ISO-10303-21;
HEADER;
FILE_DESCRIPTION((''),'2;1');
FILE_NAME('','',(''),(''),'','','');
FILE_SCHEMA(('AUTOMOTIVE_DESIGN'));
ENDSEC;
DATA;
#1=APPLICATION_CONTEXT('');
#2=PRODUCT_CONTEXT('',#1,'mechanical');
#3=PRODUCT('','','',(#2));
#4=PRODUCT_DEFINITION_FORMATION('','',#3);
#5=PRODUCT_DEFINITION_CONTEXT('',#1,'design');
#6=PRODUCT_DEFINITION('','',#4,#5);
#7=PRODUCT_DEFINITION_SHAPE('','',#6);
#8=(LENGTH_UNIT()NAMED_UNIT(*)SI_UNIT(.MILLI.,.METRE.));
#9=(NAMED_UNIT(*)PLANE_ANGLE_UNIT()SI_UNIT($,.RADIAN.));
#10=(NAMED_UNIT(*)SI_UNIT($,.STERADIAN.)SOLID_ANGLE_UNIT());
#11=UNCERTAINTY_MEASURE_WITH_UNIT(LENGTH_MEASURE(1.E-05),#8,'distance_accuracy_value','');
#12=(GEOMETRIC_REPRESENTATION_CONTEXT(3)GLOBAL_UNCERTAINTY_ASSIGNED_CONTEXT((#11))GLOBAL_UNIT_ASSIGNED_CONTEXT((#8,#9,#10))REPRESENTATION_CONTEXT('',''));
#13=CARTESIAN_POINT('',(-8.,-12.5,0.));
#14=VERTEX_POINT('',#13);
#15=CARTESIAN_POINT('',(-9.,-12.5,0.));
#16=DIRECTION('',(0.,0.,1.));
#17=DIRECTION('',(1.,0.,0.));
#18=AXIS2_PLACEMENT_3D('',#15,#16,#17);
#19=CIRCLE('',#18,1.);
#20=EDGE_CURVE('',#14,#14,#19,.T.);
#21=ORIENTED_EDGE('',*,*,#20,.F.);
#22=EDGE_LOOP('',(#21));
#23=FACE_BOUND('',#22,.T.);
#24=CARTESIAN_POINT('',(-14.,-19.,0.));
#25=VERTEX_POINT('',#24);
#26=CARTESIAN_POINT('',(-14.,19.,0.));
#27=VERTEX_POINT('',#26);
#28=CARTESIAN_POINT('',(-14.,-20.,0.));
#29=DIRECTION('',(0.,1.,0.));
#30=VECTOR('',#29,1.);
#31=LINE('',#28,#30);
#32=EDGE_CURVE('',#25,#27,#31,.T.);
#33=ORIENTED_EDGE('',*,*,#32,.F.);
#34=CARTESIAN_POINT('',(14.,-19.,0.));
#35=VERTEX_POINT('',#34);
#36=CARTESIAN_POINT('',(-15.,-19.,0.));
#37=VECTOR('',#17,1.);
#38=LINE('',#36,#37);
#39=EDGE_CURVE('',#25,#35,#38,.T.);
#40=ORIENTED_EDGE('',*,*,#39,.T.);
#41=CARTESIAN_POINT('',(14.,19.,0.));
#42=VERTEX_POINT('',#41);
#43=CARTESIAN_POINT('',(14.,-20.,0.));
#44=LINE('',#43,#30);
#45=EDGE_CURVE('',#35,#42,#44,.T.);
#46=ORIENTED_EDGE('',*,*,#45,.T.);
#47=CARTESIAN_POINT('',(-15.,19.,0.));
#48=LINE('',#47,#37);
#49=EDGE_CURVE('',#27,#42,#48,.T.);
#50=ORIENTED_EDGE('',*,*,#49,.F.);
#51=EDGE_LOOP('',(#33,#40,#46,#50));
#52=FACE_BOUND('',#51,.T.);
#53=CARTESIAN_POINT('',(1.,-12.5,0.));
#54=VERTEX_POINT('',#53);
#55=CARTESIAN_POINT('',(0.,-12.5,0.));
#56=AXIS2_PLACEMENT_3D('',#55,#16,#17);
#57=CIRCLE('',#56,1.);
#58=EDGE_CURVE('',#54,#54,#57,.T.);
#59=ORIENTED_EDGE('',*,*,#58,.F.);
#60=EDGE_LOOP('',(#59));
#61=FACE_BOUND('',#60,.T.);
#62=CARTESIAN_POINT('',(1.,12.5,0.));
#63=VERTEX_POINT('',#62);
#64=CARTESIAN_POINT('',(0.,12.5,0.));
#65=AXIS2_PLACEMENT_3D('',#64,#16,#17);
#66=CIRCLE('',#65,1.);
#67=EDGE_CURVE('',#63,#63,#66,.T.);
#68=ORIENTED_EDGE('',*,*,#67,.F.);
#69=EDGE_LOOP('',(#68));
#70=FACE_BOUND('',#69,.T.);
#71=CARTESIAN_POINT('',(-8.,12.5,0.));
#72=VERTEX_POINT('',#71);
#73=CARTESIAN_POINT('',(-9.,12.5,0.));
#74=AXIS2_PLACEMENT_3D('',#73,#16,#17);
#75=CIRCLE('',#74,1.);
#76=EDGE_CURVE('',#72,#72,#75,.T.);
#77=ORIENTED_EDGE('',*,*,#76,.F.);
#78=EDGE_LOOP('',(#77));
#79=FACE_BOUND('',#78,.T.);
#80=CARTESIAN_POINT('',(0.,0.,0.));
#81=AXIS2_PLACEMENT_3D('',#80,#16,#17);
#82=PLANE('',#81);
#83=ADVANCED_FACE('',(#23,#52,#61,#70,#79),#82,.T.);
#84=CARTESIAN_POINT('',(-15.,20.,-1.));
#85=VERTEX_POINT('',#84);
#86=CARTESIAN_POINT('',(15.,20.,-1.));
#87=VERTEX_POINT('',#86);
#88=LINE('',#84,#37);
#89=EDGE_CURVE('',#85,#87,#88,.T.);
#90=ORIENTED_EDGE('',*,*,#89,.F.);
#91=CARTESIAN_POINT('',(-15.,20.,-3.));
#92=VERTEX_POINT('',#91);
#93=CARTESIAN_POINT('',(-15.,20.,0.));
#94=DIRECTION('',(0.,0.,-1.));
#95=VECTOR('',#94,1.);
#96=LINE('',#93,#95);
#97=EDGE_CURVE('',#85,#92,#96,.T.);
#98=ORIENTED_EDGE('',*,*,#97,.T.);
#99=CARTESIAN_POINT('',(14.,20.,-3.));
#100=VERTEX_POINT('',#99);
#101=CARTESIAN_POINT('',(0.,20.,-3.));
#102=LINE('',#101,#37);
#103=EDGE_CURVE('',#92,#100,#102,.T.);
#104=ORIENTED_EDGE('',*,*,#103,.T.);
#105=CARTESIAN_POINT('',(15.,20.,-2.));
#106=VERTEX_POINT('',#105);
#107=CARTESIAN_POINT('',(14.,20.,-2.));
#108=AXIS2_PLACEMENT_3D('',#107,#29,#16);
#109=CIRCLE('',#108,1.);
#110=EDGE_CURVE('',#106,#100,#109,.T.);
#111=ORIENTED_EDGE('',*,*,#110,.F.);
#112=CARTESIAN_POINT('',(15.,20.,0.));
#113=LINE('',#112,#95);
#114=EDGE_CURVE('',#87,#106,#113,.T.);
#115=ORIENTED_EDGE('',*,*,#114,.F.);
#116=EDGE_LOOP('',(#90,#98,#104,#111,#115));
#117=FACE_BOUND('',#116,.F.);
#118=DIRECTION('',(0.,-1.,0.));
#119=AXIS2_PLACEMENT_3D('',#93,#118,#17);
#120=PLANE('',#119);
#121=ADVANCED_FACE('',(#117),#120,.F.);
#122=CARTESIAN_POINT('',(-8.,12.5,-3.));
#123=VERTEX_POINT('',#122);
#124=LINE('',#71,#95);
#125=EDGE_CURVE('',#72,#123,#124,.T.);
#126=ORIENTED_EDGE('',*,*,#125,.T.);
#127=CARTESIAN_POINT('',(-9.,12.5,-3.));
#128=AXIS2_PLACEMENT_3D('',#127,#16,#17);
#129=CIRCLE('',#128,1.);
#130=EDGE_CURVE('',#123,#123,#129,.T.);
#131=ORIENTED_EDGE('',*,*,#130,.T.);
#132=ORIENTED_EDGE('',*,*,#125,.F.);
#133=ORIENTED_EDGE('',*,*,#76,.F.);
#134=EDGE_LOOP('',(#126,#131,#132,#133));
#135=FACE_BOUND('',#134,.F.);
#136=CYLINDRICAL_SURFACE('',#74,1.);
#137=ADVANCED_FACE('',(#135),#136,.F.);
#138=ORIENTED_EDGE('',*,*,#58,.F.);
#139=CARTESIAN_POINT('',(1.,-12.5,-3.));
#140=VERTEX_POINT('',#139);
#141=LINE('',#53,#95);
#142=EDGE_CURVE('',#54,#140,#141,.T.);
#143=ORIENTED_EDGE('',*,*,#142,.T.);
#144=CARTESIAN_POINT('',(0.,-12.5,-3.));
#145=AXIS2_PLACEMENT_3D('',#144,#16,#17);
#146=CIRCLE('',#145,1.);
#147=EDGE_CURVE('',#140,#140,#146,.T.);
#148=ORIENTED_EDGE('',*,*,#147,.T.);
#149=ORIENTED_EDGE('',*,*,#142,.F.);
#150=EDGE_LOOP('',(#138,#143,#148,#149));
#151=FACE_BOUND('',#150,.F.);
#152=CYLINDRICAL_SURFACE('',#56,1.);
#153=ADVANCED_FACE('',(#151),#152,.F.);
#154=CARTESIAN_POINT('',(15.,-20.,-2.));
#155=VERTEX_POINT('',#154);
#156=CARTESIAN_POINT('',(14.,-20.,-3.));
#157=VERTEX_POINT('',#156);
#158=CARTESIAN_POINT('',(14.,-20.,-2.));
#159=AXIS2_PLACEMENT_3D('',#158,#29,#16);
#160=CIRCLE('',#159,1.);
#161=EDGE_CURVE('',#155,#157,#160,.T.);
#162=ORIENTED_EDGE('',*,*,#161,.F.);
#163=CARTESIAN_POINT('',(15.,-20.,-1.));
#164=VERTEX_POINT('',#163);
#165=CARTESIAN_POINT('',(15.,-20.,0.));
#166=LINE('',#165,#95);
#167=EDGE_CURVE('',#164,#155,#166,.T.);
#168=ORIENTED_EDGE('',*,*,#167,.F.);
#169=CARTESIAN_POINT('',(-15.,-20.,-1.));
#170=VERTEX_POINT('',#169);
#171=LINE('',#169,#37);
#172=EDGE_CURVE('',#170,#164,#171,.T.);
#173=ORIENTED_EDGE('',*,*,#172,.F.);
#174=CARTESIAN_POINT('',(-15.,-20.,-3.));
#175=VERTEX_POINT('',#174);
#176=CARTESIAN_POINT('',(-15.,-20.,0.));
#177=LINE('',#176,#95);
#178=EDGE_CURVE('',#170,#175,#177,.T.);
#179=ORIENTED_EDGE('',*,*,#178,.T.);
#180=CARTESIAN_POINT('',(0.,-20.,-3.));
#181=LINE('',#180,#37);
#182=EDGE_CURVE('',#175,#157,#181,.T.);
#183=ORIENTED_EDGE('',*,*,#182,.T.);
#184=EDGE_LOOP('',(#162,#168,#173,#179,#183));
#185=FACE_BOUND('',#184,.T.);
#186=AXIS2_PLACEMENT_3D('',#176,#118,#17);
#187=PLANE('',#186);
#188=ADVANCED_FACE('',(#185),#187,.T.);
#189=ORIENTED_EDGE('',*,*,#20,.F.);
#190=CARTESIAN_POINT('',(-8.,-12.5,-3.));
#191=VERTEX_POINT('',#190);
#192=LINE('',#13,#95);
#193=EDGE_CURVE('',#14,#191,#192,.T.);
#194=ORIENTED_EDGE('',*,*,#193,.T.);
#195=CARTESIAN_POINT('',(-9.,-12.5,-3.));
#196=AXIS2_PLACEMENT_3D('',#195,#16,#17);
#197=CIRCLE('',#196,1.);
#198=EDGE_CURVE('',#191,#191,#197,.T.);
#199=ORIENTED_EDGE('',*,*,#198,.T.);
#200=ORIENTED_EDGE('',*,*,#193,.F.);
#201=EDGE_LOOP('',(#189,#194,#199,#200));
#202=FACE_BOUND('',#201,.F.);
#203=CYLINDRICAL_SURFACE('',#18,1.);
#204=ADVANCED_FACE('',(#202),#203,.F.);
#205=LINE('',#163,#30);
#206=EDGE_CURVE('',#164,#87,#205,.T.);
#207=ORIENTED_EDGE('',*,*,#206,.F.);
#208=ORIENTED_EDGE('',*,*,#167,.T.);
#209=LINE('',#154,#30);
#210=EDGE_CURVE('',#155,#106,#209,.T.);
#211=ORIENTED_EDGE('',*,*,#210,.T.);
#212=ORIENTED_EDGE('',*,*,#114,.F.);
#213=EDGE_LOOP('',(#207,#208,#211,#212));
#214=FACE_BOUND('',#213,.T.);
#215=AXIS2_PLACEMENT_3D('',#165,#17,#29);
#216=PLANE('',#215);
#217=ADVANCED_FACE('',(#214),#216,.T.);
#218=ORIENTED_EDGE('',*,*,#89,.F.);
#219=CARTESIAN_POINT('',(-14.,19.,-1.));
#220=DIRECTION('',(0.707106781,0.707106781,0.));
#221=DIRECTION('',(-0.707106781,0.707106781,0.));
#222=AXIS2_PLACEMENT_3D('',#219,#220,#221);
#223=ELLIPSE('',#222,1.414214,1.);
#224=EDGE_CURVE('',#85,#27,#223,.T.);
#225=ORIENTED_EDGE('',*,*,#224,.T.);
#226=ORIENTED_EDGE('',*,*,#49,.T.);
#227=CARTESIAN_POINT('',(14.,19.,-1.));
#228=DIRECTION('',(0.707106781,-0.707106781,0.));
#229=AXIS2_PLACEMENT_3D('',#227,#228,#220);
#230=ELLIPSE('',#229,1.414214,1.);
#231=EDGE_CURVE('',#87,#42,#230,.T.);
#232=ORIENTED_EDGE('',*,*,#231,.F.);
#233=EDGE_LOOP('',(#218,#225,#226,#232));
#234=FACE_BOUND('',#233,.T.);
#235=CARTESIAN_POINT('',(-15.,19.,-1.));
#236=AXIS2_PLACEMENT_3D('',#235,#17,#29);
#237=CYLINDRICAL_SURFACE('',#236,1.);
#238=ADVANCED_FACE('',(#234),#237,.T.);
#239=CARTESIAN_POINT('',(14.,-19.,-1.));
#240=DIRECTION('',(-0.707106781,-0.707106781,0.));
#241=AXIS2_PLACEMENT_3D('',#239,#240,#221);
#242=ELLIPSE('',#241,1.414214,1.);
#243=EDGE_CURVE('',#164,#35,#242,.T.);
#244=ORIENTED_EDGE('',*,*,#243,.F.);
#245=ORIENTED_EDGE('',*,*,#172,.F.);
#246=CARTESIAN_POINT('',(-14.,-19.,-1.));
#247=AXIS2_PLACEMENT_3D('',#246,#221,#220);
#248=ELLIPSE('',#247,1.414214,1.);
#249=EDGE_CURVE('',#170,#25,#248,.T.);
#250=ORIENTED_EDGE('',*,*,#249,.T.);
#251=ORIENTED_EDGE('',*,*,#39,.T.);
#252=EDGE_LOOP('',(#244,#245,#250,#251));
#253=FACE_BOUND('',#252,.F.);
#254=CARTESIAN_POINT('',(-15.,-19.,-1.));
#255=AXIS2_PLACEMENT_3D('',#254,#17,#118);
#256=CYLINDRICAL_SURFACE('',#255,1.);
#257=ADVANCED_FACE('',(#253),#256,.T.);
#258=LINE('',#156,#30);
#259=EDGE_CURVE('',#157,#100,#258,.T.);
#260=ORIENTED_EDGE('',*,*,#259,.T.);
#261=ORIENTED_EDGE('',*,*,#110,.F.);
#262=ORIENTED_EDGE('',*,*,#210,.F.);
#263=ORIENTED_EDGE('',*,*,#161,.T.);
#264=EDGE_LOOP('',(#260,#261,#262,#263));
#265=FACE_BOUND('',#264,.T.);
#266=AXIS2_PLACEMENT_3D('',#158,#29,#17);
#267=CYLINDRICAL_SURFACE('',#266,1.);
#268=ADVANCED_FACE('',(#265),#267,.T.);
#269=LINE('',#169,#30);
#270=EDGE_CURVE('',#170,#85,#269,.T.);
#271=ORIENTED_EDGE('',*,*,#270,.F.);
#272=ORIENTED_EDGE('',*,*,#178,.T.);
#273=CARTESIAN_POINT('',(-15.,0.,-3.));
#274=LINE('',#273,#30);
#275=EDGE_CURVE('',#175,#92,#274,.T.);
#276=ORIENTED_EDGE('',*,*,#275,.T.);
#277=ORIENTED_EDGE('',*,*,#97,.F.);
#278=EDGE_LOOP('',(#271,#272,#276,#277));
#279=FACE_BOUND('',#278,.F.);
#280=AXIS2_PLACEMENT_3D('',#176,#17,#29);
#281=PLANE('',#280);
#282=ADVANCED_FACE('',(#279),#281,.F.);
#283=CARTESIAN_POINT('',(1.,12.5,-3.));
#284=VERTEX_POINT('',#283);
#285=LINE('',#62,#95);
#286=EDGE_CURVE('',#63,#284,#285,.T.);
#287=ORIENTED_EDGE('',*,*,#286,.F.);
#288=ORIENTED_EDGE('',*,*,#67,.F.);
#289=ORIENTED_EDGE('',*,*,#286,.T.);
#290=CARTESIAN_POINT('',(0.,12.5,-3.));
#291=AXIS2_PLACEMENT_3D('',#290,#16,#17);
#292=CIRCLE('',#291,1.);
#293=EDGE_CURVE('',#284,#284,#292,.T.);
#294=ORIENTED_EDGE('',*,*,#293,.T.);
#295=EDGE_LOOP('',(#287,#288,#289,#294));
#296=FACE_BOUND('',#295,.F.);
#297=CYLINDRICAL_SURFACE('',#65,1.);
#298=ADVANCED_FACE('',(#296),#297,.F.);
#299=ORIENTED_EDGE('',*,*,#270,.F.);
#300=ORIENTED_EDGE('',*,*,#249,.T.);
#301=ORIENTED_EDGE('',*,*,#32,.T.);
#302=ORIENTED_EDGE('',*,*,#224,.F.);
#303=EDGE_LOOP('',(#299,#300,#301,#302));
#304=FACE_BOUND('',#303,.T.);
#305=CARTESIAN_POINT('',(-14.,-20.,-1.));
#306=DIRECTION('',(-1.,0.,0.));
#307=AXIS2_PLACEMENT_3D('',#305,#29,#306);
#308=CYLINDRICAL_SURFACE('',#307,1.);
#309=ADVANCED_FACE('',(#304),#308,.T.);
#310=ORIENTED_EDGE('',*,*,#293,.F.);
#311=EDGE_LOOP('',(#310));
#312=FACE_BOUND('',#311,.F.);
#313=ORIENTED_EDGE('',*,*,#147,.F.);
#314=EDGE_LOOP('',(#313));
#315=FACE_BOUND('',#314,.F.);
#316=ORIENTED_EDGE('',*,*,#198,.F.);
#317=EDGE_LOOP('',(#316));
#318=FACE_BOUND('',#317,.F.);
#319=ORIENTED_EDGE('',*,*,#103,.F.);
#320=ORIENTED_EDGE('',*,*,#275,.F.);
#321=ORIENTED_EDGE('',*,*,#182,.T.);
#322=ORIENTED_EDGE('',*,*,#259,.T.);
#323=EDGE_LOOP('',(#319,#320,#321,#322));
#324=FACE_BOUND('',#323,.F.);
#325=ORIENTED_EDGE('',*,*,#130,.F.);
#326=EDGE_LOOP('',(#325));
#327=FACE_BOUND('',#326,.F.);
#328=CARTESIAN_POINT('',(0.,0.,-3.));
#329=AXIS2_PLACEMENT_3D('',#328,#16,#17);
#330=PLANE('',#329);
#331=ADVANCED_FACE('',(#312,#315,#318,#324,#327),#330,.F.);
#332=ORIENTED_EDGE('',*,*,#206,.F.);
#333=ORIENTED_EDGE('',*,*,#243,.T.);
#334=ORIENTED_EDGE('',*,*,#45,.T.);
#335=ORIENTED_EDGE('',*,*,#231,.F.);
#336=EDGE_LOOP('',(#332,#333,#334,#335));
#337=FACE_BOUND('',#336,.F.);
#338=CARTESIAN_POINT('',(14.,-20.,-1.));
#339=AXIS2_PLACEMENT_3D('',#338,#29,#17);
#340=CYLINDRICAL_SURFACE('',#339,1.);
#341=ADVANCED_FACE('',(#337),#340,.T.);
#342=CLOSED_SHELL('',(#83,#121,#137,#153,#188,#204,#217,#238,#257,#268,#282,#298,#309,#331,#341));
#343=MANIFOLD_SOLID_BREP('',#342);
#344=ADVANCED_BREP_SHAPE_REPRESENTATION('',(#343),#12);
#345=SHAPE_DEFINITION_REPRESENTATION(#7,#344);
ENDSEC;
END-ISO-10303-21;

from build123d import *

# Parameters (mm, degrees)
F0_W     = 30
F0_H     = 40
F0_R     = 1
F1_DEPTH = 3
F2_R     = 1


# Not quite as in the source:
# - a feature names something its author has since deleted; it is built from what else it names


with BuildPart() as f1:
    # F0 (on Top) → F1 (new body)
    with BuildSketch(Plane.XY):
        Rectangle(F0_W, F0_H)
        with Locations((-9, -12.5)):
            Circle(F0_R, mode=Mode.SUBTRACT)
        with Locations((0, -12.5)):
            Circle(F0_R, mode=Mode.SUBTRACT)
        with Locations((-9, 12.5)):
            Circle(F0_R, mode=Mode.SUBTRACT)
        with Locations((0, 12.5)):
            Circle(F0_R, mode=Mode.SUBTRACT)
    extrude(amount=-F1_DEPTH)

    # F2
    f2_edges = [f1.edges().sort_by_distance(p)[0] for p in [
        (-15, 0, 0),
        (0, 20, 0),
        (15, 0, 0),
        (0, -20, 0),
        (15, 0, -3),
    ]]
    fillet(f2_edges, radius=F2_R)


solid = f1.part
